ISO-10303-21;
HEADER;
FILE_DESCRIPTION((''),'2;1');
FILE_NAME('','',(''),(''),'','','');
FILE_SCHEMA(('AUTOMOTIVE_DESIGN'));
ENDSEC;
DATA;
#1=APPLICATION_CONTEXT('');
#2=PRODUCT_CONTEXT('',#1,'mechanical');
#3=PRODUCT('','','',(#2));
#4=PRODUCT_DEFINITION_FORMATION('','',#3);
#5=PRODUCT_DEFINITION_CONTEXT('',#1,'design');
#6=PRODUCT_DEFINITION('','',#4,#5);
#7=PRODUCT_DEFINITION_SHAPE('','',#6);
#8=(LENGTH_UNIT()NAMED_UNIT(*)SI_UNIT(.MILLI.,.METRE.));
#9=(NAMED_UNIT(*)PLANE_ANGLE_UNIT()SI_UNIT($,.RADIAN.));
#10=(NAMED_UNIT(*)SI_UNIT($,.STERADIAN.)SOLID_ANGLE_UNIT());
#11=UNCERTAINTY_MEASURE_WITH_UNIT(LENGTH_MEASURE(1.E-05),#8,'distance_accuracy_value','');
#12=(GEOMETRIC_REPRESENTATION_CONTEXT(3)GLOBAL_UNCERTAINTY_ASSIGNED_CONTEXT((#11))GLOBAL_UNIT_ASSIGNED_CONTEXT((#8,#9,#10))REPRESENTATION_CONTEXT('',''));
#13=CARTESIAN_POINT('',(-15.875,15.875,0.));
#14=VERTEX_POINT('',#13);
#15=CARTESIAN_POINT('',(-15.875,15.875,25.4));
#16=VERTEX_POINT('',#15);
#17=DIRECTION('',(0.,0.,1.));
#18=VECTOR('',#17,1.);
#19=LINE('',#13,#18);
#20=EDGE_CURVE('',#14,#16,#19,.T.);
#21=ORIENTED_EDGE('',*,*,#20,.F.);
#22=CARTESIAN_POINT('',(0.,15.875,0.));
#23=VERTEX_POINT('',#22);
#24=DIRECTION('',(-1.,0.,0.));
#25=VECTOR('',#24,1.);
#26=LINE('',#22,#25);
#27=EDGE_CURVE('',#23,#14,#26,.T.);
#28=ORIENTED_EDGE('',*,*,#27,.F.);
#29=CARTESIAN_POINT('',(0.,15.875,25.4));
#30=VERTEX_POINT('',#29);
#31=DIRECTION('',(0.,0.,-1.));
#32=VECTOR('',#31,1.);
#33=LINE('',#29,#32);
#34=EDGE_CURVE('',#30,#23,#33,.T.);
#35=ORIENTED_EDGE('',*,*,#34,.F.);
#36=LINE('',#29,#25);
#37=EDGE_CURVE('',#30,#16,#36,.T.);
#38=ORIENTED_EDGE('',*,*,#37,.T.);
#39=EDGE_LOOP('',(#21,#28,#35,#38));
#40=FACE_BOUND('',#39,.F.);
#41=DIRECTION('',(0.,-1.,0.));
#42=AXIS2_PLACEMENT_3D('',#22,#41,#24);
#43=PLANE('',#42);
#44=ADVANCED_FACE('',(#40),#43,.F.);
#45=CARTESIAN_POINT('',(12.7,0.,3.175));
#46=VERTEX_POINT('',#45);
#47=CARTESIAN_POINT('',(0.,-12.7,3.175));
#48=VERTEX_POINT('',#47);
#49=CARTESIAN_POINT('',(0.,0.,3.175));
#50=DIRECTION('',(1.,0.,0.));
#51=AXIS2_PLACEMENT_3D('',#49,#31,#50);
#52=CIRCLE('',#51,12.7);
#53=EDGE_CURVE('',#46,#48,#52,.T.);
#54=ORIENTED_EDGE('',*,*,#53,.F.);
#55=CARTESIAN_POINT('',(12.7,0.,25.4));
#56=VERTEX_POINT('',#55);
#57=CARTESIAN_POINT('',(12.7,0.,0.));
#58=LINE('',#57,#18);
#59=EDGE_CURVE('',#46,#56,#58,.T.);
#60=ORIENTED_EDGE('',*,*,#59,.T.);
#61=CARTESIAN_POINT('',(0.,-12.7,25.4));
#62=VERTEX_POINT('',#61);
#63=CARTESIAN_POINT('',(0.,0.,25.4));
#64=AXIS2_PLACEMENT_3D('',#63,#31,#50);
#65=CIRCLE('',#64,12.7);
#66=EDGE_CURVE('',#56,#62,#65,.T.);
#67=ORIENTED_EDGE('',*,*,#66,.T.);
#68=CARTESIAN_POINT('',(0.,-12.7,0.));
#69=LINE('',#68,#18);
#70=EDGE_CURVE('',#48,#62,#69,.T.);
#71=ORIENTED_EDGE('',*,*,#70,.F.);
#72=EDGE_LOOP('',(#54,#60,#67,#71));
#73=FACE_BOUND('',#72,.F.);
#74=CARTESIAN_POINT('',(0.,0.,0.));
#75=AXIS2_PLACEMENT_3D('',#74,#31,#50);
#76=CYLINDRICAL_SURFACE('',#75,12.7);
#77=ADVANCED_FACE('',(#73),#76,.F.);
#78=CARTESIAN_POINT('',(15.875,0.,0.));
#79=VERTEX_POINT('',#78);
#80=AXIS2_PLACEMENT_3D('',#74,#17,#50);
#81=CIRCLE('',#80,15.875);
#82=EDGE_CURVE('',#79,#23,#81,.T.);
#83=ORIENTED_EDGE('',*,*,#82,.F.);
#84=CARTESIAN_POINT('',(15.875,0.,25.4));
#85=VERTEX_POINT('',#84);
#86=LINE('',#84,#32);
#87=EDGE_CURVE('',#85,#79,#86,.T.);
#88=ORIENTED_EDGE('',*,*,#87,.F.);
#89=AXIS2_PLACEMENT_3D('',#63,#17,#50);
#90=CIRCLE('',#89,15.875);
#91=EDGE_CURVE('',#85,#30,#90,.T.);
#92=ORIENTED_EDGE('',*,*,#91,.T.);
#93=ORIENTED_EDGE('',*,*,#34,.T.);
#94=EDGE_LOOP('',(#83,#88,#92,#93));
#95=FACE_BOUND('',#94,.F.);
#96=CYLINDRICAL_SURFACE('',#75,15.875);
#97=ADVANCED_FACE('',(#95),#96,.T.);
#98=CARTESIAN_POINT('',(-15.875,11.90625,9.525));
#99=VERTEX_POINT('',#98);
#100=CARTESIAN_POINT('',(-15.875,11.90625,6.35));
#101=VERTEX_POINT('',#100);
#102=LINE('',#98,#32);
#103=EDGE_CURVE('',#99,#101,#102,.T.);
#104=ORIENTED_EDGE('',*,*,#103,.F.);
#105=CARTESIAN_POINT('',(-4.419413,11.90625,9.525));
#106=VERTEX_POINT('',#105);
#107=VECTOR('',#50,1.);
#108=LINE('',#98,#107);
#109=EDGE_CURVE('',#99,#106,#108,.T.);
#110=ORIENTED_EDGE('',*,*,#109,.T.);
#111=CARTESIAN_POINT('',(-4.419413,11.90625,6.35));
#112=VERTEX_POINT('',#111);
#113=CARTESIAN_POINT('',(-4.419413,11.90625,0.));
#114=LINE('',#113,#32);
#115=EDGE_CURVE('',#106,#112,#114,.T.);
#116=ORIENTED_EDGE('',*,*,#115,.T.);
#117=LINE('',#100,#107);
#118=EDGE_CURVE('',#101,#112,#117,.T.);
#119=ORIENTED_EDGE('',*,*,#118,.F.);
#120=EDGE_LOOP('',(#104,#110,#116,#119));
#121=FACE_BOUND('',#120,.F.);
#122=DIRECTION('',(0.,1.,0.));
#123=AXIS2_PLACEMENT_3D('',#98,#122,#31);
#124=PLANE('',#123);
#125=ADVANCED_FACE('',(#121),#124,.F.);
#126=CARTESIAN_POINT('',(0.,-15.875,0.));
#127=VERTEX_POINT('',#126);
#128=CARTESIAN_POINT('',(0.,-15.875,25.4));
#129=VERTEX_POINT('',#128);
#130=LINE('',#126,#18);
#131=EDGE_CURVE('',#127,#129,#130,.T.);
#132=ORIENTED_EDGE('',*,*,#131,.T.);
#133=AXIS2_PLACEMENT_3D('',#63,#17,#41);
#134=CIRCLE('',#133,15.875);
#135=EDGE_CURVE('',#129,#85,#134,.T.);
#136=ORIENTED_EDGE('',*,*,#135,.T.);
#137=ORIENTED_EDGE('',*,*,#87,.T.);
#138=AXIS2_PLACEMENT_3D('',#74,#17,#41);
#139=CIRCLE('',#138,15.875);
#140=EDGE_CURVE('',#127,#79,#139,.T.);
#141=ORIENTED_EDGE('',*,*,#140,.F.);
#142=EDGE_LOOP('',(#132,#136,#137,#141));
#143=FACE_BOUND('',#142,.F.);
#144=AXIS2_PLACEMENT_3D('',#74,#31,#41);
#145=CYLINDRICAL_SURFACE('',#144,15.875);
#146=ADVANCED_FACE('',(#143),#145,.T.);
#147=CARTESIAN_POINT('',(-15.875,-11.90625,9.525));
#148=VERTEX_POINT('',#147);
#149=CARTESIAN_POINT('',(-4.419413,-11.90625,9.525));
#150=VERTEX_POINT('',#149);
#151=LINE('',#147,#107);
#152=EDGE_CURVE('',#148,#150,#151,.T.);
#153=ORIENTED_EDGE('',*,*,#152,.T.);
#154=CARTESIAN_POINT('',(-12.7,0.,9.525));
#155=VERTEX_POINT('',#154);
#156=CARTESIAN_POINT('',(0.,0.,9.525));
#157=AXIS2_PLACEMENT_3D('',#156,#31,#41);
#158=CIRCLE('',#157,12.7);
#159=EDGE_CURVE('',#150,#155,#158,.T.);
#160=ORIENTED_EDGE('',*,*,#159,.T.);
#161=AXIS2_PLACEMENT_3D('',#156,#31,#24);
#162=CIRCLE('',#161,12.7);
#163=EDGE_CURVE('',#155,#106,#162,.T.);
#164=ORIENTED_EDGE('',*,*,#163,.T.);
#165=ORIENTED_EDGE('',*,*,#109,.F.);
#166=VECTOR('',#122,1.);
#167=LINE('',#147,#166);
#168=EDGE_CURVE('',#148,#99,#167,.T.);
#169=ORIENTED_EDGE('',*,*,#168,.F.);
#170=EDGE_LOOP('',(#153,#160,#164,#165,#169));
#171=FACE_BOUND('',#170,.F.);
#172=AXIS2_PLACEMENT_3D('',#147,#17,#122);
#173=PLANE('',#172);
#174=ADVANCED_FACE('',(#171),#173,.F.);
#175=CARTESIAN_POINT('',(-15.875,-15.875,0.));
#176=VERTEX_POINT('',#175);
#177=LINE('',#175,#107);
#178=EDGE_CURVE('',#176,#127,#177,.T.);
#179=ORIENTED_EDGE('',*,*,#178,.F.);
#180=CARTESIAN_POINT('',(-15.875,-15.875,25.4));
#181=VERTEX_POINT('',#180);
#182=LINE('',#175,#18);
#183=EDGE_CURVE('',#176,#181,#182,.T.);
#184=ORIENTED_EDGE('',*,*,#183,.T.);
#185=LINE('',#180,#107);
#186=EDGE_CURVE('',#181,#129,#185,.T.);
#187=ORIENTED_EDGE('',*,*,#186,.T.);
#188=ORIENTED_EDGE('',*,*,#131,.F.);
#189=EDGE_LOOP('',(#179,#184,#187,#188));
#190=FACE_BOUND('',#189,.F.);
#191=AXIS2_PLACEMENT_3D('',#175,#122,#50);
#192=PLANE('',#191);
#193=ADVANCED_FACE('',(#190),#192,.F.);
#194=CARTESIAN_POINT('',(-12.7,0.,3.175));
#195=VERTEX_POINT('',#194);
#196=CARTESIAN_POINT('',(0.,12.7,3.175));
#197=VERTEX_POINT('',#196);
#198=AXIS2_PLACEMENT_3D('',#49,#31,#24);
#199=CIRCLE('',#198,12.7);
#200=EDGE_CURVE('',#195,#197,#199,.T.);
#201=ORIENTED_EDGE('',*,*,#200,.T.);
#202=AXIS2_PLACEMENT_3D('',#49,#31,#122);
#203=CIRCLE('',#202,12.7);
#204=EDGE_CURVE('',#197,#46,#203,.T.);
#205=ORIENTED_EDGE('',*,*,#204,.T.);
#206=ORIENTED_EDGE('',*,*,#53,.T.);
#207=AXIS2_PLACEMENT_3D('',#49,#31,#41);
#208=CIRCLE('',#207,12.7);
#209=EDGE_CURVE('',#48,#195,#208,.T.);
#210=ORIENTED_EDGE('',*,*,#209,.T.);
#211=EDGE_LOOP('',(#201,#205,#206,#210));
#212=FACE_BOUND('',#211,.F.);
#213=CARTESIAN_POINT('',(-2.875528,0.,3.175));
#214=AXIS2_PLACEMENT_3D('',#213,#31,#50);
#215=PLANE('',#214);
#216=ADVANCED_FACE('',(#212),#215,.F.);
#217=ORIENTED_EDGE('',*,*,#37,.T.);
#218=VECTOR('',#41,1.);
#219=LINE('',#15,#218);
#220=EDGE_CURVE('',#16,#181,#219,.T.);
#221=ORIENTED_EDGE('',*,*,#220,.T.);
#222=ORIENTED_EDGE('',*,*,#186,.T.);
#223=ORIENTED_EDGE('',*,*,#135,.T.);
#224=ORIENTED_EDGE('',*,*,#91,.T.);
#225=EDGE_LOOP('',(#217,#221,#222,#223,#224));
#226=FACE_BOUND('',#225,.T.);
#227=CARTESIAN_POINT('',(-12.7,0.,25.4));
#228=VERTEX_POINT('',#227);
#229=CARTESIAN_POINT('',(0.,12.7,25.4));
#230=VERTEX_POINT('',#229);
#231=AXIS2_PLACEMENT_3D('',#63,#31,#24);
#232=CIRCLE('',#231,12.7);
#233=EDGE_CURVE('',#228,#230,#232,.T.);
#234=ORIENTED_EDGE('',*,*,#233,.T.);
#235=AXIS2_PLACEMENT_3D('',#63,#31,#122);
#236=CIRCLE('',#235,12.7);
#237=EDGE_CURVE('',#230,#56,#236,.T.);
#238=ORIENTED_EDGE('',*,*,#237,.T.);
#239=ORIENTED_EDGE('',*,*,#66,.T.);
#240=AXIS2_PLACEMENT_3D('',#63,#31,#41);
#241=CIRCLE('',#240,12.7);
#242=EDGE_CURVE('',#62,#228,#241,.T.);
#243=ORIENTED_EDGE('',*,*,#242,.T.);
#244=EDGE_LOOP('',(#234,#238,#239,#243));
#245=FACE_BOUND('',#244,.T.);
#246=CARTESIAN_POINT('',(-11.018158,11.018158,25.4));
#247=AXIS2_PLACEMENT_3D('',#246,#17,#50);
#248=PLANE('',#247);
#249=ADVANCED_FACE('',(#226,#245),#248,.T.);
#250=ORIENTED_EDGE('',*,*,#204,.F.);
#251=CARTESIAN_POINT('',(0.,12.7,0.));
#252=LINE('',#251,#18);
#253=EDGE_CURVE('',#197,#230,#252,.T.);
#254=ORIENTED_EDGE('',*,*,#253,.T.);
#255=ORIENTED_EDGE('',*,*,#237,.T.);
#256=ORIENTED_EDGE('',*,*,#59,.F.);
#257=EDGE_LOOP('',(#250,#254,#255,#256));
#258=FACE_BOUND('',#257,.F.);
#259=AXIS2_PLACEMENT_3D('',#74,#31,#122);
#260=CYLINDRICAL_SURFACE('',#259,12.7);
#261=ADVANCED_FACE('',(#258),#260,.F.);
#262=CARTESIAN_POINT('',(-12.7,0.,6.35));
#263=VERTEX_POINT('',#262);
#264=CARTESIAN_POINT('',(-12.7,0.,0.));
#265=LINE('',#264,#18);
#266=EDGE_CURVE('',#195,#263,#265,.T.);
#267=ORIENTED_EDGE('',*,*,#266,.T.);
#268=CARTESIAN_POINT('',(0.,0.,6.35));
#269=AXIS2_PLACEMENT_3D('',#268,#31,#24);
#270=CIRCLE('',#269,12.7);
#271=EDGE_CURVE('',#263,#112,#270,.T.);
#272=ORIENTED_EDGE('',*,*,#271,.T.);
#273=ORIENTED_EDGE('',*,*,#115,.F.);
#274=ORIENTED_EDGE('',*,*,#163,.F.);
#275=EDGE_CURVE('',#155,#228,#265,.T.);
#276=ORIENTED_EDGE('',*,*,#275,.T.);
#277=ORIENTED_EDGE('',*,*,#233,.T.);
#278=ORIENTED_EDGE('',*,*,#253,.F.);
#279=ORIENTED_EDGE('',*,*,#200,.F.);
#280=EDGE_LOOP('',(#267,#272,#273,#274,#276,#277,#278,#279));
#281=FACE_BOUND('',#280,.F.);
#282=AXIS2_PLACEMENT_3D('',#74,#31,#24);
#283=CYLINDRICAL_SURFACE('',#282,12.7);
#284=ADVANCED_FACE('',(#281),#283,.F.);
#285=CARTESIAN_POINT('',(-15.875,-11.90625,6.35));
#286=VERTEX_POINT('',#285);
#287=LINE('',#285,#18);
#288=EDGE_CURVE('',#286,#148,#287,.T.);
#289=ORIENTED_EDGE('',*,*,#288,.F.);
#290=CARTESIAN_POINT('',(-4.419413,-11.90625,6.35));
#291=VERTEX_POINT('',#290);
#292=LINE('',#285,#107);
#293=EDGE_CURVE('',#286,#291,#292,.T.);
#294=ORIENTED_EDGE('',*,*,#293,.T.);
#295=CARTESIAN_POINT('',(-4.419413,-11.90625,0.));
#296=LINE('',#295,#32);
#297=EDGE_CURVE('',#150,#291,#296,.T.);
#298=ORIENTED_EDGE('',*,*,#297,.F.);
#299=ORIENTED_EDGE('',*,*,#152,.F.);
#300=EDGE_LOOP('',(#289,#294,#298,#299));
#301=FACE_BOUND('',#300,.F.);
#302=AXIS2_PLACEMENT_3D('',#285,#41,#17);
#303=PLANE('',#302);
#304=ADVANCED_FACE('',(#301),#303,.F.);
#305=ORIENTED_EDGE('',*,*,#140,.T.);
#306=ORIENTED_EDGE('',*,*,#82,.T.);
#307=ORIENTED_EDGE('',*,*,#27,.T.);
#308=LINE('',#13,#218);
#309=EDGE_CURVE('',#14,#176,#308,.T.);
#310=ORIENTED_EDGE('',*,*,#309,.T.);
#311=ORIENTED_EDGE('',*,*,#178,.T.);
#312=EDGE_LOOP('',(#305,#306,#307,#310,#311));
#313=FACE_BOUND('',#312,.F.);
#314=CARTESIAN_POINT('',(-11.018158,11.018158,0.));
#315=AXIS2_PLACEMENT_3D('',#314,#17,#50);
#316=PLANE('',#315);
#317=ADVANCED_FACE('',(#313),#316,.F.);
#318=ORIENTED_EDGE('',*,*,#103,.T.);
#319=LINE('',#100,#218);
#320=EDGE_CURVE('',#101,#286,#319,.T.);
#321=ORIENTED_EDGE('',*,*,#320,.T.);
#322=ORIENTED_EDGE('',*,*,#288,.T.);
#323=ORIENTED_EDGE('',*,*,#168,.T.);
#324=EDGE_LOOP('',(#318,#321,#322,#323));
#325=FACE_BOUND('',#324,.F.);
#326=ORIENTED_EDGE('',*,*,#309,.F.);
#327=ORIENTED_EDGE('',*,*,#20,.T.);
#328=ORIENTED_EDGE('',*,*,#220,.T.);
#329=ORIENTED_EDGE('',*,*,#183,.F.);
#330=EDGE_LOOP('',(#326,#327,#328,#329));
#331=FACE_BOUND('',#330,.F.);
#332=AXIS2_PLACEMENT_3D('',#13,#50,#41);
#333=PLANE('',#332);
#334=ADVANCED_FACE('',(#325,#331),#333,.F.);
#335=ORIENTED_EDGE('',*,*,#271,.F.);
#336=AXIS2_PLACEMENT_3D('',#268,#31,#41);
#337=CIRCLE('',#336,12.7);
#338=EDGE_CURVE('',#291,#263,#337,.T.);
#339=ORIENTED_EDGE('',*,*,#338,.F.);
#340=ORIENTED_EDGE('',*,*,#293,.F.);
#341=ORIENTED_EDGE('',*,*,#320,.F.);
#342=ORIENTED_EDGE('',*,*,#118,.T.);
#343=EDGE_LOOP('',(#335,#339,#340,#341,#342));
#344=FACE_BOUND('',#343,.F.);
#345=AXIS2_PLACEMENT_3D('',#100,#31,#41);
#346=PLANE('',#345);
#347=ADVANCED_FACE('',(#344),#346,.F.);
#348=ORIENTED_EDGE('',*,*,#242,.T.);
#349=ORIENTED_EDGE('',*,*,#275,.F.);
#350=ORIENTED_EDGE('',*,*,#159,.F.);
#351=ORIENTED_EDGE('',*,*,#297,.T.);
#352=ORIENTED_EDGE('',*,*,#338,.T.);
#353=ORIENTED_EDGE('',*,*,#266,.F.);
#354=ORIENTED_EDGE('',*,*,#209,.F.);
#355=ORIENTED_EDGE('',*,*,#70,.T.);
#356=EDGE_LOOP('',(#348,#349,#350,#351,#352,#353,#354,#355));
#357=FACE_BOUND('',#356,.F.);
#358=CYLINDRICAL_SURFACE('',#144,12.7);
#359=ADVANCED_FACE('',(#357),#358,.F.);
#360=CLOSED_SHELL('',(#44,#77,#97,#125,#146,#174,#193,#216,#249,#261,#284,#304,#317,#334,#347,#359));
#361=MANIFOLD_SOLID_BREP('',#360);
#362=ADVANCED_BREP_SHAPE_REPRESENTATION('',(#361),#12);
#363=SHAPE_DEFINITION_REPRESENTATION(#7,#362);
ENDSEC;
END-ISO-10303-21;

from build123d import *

# Parameters (mm, degrees)
F1_DEPTH = 25.4
F2_R     = 12.7
F3_DEPTH = 3.175
F5_DEPTH = 12.7


with BuildPart() as f1:
    # F0 (on Top) → F1 (new body)
    with BuildSketch(Plane.XY):
        with BuildLine():
            ThreePointArc((-15.875, 0), (-11.2253201513, 11.2253201513), (0, 15.875))
            Line((0, 15.875), (-15.875, 15.875))
            Line((-15.875, 15.875), (-15.875, 0))
        make_face()
        with BuildLine():
            Line((-15.875, -15.875), (0, -15.875))
            ThreePointArc((0, -15.875), (-11.2253201513, -11.2253201513), (-15.875, 0))
            Line((-15.875, 0), (-15.875, -15.875))
        make_face()
        with BuildLine():
            Line((0, -15.875), (0, -12.7))
            ThreePointArc((0, -12.7), (-8.9802561211, -8.9802561211), (-12.7, 0))
            Line((-12.7, 0), (-15.875, 0))
            ThreePointArc((-15.875, 0), (-11.2253201513, -11.2253201513), (0, -15.875))
        make_face()
        with BuildLine():
            ThreePointArc((-12.7, 0), (-8.9802561211, 8.9802561211), (0, 12.7))
            Line((0, 12.7), (0, 15.875))
            ThreePointArc((0, 15.875), (-11.2253201513, 11.2253201513), (-15.875, 0))
            Line((-15.875, 0), (-12.7, 0))
        make_face()
        with BuildLine():
            ThreePointArc((0, 12.7), (8.9802561211, 8.9802561211), (12.7, 0))
            ThreePointArc((12.7, 0), (8.9802561211, -8.9802561211), (0, -12.7))
            Line((0, -12.7), (0, -15.875))
            ThreePointArc((0, -15.875), (11.2253201513, -11.2253201513), (15.875, 0))
            ThreePointArc((15.875, 0), (11.2253201513, 11.2253201513), (0, 15.875))
            Line((0, 15.875), (0, 12.7))
        make_face()
    extrude(amount=F1_DEPTH)

    # F2 (on face) → F3 (join)
    with BuildSketch(Plane(origin=(0, 0, 0), x_dir=(1, 0, 0), z_dir=(0, 0, -1))):
        with BuildLine():
            Line((-15.875, 15.875), (-15.875, -15.875))
            Line((-15.875, -15.875), (0, -15.875))
            ThreePointArc((0, -15.875), (15.875, 0), (0, 15.875))
            Line((0, 15.875), (-15.875, 15.875))
        make_face()
        Circle(F2_R, mode=Mode.SUBTRACT)
        Circle(F2_R)
    extrude(amount=-F3_DEPTH)

    # F4 (on face) → F5 (cut)
    with BuildSketch(Plane(origin=(-15.875, 0, 0), x_dir=(0, -1, 0), z_dir=(-1, 0, 0))):
        Polygon((0, 6.35), (0, 9.525), (-7.9375, 9.525), (-11.90625, 9.525), (-11.90625, 6.35), (-7.9375, 6.35), align=None)
        Polygon((7.9375, 9.525), (0, 9.525), (0, 6.35), (7.9375, 6.35), (11.90625, 6.35), (11.90625, 9.525), align=None)
    extrude(amount=-F5_DEPTH, mode=Mode.SUBTRACT)


solid = f1.part
